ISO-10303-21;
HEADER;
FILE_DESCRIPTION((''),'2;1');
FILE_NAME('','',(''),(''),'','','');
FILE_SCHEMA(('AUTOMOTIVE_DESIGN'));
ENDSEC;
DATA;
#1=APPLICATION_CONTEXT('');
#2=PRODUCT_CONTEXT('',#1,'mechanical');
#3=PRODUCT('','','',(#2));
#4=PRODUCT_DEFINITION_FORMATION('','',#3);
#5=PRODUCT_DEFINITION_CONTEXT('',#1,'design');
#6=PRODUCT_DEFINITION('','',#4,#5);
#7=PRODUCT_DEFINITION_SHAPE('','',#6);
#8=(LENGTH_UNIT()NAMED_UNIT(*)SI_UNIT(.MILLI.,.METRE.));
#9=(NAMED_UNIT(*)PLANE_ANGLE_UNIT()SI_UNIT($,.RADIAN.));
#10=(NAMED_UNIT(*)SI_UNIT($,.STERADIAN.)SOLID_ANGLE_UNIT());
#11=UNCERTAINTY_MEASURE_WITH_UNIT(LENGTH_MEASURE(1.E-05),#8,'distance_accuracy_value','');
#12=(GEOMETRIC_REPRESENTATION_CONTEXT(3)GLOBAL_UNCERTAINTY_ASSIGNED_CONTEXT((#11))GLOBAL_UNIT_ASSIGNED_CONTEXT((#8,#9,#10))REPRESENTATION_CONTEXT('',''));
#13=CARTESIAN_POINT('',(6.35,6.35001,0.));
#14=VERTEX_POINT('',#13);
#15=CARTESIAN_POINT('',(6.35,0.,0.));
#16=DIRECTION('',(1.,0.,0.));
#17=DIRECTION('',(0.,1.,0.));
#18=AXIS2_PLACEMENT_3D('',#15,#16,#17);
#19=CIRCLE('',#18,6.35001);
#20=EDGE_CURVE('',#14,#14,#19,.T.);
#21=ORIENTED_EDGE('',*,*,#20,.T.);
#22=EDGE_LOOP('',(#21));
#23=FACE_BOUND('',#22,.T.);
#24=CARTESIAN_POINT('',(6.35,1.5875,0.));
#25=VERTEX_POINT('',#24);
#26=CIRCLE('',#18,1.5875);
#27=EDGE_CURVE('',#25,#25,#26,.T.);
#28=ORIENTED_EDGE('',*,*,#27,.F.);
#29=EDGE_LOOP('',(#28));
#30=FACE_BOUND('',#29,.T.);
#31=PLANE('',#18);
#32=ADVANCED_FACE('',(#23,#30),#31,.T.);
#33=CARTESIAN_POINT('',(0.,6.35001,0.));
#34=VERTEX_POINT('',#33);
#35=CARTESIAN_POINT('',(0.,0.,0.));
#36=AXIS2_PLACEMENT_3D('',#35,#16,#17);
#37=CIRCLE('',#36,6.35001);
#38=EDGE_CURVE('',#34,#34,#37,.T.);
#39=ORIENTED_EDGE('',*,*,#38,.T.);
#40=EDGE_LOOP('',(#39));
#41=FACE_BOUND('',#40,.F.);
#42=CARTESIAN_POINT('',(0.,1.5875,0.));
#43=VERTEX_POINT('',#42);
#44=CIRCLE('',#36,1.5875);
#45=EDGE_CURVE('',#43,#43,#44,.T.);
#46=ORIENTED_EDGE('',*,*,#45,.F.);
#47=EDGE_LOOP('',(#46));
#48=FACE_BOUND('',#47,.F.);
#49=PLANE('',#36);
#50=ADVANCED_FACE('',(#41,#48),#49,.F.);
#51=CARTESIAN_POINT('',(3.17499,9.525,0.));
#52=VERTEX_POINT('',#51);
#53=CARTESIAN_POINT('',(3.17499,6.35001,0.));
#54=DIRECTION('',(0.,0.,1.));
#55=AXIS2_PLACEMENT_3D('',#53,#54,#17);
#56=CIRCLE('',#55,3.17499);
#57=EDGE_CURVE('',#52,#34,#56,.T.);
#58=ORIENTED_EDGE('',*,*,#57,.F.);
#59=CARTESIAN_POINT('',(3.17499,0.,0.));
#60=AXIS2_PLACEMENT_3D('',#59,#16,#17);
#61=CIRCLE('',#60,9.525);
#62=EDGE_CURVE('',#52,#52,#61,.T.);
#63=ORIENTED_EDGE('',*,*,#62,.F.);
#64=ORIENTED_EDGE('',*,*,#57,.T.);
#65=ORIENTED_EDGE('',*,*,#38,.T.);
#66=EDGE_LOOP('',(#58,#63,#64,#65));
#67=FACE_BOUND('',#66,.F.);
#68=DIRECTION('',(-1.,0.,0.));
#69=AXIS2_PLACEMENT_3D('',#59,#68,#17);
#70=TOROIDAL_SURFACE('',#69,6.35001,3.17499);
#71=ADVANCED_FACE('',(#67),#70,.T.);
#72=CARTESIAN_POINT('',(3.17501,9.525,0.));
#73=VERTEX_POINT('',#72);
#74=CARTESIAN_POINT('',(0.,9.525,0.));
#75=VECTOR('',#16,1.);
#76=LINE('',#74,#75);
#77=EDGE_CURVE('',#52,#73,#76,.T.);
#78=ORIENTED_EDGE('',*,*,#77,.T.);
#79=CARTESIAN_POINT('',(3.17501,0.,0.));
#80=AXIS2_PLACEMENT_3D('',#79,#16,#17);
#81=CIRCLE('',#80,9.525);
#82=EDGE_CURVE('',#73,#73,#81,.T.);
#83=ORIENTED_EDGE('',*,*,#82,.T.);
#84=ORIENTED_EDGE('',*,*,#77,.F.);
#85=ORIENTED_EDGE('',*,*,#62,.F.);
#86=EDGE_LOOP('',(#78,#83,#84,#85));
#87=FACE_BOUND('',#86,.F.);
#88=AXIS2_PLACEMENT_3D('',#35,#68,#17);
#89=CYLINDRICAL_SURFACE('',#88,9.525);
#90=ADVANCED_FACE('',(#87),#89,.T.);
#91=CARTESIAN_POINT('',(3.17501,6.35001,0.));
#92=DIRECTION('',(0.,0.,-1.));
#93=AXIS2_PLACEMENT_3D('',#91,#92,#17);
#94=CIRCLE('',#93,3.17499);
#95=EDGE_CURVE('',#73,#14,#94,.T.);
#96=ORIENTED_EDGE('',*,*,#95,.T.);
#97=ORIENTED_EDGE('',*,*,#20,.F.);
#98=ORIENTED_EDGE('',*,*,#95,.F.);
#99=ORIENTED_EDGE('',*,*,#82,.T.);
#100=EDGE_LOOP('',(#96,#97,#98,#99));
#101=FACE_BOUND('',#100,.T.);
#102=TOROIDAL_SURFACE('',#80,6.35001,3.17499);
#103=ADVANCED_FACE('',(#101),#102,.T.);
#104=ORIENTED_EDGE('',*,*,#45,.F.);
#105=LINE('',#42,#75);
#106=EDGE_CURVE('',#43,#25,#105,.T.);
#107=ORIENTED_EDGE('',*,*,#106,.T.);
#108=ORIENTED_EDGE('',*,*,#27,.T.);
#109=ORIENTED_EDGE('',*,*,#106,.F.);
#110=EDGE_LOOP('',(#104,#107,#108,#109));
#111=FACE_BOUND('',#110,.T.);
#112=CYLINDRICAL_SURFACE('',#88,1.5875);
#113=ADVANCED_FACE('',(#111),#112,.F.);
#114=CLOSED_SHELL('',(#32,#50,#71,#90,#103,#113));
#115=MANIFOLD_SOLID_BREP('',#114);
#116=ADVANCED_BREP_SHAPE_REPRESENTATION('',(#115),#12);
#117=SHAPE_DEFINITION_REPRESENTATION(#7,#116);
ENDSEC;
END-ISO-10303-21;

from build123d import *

# Parameters (mm, degrees)
F0_R     = 9.525
F0_R_2   = 1.5875
F1_DEPTH = 6.35
F2_R     = 3.17499


# Not quite as in the source:
# - a fillet or chamfer is up to 0.001 mm smaller than in the source, because OpenCascade refuses the exact size


with BuildPart() as f1:
    # F0 (on Right) → F1 (new body)
    with BuildSketch(Plane.YZ):
        Circle(F0_R)
        Circle(F0_R_2, mode=Mode.SUBTRACT)
    extrude(amount=F1_DEPTH)

    # F2 (radius 3.175 in the source; OpenCascade refuses exactly that, so slightly less here)
    f2_edges = [f1.edges().sort_by_distance(p)[0] for p in [
        (6.35, -9.525, 0),
        (0, -9.525, 0),
    ]]
    fillet(f2_edges, radius=F2_R)


solid = f1.part
